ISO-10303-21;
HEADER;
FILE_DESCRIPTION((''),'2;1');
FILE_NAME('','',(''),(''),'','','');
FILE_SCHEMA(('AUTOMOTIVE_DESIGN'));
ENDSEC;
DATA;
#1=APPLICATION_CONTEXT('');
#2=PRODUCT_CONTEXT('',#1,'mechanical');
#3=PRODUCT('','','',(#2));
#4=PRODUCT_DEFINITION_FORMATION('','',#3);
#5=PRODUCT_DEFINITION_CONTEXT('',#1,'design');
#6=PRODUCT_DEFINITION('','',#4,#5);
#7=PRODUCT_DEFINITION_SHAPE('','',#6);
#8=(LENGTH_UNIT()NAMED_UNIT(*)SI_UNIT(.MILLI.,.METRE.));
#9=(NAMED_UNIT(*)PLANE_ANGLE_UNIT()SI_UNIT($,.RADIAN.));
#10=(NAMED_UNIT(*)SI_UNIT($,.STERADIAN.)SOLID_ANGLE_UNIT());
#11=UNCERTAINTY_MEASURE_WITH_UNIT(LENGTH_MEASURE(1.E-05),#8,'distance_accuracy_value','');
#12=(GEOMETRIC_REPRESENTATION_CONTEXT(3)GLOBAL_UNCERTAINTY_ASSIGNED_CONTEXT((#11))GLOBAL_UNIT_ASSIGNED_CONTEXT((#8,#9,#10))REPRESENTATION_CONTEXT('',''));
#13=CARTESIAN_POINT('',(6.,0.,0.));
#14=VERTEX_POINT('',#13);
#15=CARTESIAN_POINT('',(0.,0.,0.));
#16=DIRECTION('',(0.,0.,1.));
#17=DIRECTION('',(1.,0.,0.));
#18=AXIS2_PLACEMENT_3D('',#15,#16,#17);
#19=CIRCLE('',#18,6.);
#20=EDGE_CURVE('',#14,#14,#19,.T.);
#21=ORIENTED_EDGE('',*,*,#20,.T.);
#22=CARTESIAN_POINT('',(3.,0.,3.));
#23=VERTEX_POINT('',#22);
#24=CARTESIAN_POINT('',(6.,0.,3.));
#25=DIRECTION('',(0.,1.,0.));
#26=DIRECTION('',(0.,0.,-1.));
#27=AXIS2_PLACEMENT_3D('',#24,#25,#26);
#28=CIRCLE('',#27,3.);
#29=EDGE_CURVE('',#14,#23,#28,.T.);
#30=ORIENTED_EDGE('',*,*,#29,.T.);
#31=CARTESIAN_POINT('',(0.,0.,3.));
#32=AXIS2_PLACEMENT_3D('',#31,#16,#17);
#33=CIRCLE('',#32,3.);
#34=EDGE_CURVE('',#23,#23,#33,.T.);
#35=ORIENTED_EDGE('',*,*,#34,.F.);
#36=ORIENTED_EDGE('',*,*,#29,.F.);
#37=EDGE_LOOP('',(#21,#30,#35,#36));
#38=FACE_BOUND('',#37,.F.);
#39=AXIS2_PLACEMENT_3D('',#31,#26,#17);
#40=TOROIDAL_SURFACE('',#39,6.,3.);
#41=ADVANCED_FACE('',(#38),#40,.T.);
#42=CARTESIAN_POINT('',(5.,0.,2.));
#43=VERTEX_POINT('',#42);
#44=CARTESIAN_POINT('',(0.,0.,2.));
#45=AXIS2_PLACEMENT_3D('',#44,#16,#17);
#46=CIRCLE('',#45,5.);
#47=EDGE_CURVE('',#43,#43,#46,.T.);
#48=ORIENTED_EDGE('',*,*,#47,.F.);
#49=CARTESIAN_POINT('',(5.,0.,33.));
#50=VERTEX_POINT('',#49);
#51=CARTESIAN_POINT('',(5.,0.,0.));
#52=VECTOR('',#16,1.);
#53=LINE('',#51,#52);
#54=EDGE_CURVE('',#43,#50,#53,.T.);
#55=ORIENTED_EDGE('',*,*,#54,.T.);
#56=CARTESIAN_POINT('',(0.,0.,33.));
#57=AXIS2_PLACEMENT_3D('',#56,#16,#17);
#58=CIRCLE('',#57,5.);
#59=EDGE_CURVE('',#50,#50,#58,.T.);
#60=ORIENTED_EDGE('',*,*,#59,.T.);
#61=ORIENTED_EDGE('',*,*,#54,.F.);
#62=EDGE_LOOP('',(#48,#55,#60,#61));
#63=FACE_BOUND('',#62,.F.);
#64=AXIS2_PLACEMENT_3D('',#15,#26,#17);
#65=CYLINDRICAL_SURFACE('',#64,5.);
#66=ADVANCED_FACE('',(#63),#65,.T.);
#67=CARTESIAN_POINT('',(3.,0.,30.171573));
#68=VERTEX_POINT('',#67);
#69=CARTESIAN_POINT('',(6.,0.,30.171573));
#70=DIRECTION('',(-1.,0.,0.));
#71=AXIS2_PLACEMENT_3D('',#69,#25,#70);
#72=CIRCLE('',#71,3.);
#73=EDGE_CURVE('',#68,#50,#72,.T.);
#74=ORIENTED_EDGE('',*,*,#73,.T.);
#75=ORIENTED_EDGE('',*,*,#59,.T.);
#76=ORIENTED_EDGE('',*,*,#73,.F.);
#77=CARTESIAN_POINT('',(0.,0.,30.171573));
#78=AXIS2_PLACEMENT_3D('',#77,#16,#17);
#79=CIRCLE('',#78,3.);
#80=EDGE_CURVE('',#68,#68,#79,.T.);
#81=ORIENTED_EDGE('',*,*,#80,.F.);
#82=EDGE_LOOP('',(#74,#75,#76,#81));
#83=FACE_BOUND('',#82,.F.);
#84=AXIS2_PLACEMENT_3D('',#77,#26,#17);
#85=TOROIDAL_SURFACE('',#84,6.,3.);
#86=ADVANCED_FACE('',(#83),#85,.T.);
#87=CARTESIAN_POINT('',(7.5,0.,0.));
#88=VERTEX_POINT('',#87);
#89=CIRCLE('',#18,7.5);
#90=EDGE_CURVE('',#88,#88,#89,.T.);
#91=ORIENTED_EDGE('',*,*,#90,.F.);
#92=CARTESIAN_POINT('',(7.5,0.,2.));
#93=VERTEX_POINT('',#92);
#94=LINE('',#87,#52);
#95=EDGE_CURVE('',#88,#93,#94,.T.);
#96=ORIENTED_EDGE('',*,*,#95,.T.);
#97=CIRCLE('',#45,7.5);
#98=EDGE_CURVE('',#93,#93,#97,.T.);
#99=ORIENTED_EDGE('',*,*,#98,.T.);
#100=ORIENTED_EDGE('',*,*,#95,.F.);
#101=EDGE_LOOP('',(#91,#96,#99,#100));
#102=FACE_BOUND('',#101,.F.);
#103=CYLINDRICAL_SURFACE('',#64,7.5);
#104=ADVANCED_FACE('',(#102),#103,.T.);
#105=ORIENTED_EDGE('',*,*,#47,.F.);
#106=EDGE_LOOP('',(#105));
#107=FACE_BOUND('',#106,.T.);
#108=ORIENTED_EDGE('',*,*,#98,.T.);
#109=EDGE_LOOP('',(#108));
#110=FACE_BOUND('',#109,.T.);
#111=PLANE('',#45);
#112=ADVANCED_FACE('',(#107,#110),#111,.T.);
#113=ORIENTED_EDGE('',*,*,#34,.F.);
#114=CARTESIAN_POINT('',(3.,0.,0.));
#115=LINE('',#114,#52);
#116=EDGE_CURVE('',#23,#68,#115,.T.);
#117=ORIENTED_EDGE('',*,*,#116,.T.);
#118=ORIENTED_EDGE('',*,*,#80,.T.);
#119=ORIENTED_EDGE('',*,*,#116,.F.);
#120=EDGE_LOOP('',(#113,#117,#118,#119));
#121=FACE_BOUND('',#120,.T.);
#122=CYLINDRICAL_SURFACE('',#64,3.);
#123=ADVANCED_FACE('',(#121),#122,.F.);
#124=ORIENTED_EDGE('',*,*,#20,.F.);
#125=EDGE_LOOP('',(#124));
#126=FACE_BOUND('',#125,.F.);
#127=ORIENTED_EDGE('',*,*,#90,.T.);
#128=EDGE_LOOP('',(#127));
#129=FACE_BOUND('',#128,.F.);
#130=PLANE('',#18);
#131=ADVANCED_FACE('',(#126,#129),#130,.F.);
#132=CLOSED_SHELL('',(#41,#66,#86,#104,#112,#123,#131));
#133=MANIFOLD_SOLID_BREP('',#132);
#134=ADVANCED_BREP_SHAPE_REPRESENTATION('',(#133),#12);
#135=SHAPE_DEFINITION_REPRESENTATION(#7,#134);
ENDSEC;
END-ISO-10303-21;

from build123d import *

# Parameters (mm, degrees)
F0_R     = 7.5
F0_R_2   = 5
F1_DEPTH = 2
F0_R_3   = 3
F2_DEPTH = 33


# Not quite as in the source:
# - a fillet or chamfer that OpenCascade refuses, or shapes differently, is made with other operations: its cross-section is extruded or revolved along the edge and cut away or added


with BuildPart() as f1:
    # F0 (on Top) → F1 (new body)
    with BuildSketch(Plane.XY):
        Circle(F0_R)
        Circle(F0_R_2, mode=Mode.SUBTRACT)
    extrude(amount=F1_DEPTH)

    # F0 (on Top) → F2 (join)
    with BuildSketch(Plane.XY):
        Circle(F0_R_2)
        Circle(F0_R_3, mode=Mode.SUBTRACT)
    extrude(amount=F2_DEPTH)

    # F3: fillet of radius 3 on 2 edges, made by hand

    # F3_s1 → F3_t2 (revolve, cut)
    with BuildSketch(Plane.XZ):
        with BuildLine():
            ThreePointArc((6, 0), (3.8786796564, 0.8786796564), (3, 3))
            Line((3, 3), (3, 0))
            Line((3, 0), (6, 0))
        make_face()
    revolve(axis=Axis((0, 0, 0), (0, 0, 1)), mode=Mode.SUBTRACT)

    # F3_s3 → F3_t4 (revolve, cut)
    with BuildSketch(Plane.XZ):
        with BuildLine():
            ThreePointArc((3, 30.1715728753), (3.5505102572, 31.9036236828), (5, 33))
            Line((5, 33), (3, 33))
            Line((3, 33), (3, 30.1715728753))
        make_face()
    revolve(axis=Axis((0, 0, 33), (0, 0, 1)), mode=Mode.SUBTRACT)


solid = f1.part
